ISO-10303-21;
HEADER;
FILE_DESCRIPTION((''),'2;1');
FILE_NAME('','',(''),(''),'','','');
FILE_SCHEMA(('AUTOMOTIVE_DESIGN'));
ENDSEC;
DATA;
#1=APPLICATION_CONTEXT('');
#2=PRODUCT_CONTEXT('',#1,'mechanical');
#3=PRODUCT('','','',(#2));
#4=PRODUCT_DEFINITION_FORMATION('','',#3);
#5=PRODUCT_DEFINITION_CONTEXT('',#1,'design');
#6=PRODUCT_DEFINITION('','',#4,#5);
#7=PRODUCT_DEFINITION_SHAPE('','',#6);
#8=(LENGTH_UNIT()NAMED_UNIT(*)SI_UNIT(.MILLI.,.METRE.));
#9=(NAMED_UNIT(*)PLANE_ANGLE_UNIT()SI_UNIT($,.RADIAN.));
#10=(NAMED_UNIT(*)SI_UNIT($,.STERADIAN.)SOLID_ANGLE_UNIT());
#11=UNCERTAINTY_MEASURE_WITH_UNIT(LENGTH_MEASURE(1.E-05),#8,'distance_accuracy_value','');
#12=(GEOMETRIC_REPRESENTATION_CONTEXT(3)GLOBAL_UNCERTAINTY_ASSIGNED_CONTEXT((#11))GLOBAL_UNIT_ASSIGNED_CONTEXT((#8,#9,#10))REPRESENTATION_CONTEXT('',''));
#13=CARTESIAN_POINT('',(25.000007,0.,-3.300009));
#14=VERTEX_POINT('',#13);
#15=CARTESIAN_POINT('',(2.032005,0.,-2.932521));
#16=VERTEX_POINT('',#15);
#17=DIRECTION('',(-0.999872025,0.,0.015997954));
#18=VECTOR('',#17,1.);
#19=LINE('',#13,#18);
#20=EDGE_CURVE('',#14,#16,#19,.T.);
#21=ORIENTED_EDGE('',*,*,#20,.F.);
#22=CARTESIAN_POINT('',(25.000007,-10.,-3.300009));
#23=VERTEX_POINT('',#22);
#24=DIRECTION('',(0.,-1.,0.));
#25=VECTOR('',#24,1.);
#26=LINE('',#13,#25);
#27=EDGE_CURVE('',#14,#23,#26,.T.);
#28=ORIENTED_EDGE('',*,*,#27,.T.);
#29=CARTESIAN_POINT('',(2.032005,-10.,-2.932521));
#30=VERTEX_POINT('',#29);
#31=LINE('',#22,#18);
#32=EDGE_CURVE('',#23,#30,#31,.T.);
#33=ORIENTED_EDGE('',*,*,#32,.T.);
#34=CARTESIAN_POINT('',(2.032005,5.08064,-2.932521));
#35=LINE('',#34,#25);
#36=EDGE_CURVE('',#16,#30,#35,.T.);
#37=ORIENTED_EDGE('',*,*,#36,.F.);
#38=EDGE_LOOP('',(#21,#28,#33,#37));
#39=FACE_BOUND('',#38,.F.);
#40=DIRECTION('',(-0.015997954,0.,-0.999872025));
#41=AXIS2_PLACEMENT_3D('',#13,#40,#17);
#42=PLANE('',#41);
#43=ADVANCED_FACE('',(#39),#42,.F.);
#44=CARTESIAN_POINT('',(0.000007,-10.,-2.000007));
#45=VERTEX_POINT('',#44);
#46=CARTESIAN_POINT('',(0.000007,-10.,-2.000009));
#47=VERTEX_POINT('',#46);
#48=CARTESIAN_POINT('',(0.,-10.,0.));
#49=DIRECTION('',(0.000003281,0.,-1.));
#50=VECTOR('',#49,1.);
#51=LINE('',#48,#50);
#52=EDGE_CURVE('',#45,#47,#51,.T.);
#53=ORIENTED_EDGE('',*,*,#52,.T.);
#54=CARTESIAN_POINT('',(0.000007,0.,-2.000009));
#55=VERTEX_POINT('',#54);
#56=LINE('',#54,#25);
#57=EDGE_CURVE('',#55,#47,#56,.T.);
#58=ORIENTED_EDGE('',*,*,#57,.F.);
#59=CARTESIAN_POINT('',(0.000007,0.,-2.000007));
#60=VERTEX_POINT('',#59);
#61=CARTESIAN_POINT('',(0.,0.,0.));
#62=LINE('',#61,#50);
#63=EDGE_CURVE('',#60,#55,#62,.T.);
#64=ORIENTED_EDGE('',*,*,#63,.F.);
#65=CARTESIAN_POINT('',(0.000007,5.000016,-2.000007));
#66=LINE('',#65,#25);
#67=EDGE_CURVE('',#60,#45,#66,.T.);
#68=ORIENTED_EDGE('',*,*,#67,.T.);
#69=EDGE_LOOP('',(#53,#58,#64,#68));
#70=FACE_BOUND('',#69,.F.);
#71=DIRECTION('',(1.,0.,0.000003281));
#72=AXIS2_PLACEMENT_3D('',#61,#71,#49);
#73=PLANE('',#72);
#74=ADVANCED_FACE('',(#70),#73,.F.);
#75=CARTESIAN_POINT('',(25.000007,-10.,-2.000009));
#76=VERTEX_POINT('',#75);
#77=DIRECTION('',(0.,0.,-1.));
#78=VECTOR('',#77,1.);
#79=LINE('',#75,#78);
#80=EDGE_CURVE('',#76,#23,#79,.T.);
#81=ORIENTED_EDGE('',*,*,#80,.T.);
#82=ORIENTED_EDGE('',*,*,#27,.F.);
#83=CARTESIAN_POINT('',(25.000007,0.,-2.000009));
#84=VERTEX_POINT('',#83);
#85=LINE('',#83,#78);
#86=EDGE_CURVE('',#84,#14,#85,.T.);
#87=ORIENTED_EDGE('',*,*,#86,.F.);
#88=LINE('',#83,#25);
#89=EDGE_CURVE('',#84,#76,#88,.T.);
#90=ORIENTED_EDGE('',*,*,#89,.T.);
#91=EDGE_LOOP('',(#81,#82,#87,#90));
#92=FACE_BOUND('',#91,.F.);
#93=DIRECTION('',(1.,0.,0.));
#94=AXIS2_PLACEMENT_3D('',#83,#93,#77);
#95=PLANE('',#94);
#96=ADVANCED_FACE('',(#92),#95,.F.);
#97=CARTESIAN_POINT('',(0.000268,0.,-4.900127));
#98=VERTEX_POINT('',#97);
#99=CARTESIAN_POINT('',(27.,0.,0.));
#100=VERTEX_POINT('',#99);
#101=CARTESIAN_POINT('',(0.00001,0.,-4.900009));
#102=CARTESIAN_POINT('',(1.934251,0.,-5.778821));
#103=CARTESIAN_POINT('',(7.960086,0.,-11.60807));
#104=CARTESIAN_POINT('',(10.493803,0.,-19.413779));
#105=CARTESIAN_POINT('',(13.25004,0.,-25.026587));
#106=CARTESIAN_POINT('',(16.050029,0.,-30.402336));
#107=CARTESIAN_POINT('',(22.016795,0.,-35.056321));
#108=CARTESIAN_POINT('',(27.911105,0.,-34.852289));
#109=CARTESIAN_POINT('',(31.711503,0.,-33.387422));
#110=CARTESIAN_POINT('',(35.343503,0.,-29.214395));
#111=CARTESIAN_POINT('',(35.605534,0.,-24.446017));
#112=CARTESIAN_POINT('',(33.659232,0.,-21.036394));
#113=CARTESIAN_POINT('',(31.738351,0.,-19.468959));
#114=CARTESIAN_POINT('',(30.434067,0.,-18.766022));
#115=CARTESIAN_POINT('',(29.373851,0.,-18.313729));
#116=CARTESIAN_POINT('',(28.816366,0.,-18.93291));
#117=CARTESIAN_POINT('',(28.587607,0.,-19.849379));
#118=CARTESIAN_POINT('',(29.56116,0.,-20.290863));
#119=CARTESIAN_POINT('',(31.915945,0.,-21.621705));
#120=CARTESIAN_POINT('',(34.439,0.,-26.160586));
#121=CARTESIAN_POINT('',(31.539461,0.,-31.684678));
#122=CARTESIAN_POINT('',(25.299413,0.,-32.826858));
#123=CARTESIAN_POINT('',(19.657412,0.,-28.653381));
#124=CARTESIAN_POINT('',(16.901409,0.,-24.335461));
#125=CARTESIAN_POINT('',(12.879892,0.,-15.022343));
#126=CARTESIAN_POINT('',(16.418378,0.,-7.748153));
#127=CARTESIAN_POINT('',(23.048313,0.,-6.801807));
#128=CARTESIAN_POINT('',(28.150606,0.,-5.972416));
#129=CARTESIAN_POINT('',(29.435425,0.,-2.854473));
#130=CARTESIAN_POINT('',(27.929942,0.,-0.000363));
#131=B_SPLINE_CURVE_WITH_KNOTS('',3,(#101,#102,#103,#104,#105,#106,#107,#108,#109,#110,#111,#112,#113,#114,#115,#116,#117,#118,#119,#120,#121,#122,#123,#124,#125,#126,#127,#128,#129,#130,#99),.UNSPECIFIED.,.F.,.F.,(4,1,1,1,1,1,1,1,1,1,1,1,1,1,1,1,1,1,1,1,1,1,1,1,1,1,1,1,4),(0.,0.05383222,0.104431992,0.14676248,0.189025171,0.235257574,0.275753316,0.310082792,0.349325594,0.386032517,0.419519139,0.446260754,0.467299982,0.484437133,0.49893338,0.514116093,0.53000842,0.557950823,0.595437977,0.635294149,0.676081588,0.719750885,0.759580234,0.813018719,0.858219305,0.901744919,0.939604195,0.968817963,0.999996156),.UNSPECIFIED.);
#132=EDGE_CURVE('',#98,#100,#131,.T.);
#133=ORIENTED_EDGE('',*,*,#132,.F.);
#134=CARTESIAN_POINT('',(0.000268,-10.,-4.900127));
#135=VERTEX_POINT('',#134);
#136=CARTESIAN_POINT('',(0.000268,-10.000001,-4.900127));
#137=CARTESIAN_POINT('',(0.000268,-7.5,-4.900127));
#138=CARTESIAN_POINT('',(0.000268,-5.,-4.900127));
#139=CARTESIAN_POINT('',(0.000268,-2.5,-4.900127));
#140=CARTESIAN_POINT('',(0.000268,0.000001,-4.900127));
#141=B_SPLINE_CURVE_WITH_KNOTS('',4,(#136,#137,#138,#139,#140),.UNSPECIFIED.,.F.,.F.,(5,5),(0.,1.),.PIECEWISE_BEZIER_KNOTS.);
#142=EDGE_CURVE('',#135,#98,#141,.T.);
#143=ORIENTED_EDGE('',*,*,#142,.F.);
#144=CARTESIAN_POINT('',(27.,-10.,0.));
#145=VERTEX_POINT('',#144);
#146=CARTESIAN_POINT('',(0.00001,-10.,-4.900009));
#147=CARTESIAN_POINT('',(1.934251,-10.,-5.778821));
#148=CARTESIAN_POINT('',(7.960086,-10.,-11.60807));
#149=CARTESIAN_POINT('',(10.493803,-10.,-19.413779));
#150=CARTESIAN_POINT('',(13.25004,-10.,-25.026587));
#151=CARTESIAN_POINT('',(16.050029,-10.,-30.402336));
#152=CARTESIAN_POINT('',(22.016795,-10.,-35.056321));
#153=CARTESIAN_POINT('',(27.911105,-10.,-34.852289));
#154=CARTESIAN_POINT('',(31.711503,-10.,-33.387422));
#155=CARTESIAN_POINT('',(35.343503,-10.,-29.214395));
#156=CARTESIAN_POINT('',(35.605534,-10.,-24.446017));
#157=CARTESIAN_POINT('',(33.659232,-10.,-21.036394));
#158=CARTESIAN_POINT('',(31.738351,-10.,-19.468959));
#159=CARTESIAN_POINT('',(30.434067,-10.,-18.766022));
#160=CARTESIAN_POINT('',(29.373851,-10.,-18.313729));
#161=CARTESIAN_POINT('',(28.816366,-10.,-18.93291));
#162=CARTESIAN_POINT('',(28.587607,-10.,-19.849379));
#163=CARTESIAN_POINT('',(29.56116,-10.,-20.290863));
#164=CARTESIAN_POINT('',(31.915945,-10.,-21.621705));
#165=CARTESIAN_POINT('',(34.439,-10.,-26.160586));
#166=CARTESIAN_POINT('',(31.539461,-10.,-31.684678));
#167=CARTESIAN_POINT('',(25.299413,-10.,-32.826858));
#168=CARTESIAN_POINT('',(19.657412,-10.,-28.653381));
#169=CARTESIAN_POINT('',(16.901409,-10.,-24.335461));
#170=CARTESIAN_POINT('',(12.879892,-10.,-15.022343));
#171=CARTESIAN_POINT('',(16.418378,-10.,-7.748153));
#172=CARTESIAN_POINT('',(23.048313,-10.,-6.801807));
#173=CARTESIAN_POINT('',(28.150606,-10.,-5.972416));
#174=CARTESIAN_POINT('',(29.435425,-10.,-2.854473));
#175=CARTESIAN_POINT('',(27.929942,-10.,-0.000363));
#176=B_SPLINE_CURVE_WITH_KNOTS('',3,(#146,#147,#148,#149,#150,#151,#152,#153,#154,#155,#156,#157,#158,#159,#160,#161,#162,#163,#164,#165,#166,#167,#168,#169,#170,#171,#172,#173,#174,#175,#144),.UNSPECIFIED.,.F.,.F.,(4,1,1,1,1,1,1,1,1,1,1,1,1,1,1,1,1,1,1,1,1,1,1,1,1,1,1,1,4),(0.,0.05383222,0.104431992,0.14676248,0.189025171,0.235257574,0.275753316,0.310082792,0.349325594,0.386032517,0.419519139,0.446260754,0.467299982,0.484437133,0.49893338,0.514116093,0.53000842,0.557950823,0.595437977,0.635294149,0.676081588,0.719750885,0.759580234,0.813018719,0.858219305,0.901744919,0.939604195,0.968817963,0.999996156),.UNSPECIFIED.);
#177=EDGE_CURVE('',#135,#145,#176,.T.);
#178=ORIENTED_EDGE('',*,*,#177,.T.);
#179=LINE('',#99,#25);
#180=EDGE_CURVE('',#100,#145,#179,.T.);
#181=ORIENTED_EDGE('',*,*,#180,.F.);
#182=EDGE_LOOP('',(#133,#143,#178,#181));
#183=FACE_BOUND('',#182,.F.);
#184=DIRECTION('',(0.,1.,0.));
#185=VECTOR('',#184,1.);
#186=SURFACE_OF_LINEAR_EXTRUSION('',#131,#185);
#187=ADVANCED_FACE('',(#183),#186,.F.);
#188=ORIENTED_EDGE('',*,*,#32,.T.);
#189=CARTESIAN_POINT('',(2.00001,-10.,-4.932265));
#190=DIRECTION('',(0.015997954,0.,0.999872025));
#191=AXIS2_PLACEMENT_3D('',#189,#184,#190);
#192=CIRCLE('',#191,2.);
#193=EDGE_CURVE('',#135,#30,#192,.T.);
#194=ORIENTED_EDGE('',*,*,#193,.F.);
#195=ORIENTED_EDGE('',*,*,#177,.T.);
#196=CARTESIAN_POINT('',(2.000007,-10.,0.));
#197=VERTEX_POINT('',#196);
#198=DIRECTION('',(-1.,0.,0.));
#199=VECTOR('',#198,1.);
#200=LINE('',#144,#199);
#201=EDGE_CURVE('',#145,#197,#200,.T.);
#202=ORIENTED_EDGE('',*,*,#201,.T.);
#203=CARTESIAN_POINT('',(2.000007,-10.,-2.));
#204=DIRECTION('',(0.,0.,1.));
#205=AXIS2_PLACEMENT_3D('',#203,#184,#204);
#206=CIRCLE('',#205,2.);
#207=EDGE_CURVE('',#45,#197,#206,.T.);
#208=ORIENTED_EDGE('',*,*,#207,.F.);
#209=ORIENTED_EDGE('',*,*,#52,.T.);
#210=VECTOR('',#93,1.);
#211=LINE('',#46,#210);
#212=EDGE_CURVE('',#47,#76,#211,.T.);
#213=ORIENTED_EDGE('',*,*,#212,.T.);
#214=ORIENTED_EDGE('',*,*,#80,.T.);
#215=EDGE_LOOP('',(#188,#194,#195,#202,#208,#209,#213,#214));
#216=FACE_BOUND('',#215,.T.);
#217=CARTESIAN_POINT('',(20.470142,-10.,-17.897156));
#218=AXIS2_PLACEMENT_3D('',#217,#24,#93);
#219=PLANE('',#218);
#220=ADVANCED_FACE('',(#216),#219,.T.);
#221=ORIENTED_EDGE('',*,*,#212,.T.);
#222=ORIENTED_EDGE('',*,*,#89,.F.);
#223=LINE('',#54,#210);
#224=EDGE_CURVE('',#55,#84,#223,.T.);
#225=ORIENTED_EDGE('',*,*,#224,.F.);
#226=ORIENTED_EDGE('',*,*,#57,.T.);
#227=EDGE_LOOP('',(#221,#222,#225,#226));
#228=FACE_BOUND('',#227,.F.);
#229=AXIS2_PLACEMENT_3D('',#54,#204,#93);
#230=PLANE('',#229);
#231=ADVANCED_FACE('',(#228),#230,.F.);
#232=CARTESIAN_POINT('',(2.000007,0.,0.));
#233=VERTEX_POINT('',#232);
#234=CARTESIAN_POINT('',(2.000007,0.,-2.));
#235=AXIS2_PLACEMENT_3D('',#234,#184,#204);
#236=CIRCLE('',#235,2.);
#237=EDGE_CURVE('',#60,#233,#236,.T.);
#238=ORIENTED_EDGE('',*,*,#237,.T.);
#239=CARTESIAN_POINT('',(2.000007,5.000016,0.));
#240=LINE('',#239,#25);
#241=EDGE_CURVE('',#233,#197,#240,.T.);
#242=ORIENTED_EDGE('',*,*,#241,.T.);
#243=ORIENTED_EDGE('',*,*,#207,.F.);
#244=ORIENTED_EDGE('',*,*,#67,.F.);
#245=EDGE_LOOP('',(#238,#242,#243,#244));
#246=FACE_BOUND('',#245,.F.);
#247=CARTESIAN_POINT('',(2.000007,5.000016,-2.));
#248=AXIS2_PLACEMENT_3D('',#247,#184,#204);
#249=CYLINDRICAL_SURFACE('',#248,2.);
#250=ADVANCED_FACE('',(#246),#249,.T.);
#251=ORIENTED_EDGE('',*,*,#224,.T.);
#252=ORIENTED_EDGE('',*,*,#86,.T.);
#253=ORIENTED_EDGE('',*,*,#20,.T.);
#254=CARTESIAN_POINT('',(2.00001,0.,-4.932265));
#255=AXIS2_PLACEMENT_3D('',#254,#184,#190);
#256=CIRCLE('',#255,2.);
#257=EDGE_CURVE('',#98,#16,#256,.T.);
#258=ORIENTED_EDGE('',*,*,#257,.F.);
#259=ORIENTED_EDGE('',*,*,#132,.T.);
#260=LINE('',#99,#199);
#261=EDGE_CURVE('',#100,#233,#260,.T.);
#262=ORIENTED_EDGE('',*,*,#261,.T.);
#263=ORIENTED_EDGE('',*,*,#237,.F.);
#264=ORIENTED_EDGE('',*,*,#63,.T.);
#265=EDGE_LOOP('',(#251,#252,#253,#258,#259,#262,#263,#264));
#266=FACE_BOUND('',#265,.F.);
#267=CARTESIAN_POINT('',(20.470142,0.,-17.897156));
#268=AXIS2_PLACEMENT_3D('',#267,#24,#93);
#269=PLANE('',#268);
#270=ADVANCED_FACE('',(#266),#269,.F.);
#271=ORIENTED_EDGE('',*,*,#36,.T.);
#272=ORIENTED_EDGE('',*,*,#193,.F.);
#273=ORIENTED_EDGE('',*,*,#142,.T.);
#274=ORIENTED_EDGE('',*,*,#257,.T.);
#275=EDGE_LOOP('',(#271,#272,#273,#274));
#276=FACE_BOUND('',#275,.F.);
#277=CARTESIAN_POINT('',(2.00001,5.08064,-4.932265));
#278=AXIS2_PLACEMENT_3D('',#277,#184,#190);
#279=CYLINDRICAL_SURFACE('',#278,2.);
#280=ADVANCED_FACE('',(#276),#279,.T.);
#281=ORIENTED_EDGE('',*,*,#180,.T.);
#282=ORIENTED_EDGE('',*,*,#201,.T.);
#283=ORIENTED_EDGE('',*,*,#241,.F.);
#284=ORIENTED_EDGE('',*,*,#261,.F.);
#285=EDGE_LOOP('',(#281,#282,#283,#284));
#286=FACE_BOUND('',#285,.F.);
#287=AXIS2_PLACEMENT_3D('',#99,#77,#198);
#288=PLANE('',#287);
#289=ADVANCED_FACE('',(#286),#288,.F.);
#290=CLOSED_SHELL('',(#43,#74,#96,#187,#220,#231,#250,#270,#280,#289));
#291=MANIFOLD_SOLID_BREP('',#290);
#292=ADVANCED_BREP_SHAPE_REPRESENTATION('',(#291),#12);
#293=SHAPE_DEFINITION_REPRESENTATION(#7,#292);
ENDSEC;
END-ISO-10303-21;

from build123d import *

# Parameters (mm, degrees)
F1_DEPTH    = 10
F2_T1_DEPTH = 20.0000328068
F2_T3_DEPTH = 20.1612799373


# Not quite as in the source:
# - a fillet or chamfer that OpenCascade refuses, or shapes differently, is made with other operations: its cross-section is extruded or revolved along the edge and cut away or added


with BuildPart() as f1:
    # F0 (on Front) → F1 (new body)
    with BuildSketch(Plane.XZ):
        with BuildLine():
            add(Edge.make_bspline(
                [(9.514e-06, -4.9000092057), (1.9342509703, -5.7788205185), (7.9600856629, -11.6080696819), (10.4938031921, -19.4137793601), (13.2500403785, -25.0265866718), (16.0500289635, -30.4023358123), (22.0167950969, -35.0563207405), (27.911105346, -34.8522886828), (31.7115032113, -33.387422259), (35.3435032228, -29.2143946597), (35.6055339141, -24.4460169523), (33.6592318937, -21.0363941268), (31.7383507436, -19.4689594446), (30.43406686, -18.7660216625), (29.3738509318, -18.3137291708), (28.816366228, -18.9329098548), (28.5876066373, -19.8493794371), (29.561159644, -20.2908633132), (31.9159451144, -21.6217051412), (34.4389998824, -26.1605857299), (31.5394611129, -31.68467843), (25.2994133189, -32.8268584607), (19.6574120082, -28.6533809644), (16.9014092861, -24.3354611486), (12.8798924189, -15.0223427162), (16.4183782289, -7.7481533751), (23.0483128553, -6.8018068739), (28.1506056372, -5.9724164167), (29.4354248767, -2.8544727466), (27.9299423215, -0.000363307), (27, 0)],
                knots=[0, 0, 0, 0, 0.05383222, 0.1044319916, 0.1467624797, 0.1890251708, 0.2352575736, 0.2757533164, 0.3100827924, 0.3493255944, 0.3860325166, 0.4195191391, 0.4462607539, 0.4672999815, 0.4844371334, 0.4989333801, 0.5141160934, 0.5300084197, 0.557950823, 0.5954379769, 0.6352941495, 0.6760815879, 0.7197508846, 0.7595802338, 0.813018719, 0.8582193053, 0.9017449186, 0.9396041953, 0.9688179628, 0.9999961563, 0.9999961563, 0.9999961563, 0.9999961563], degree=3))
            Line((27, 0), (27, -4.9000092057))
            Line((27, -4.9000092057), (9.514e-06, -4.9000092057))
        make_face()
        Polygon((26.9996560599, 0), (0, 0), (6.5614e-06, -2.0000092057), (25.0000065614, -2.0000092057), (25.0000065614, -3.3000092057), (9.514e-06, -2.9000092057), (9.514e-06, -4.9000092057), (27, -4.9000092057), (27, 0), align=None)
    extrude(amount=F1_DEPTH)

    # F2: fillet of radius 2 on 2 edges, made by hand

    # F2_s2 → F2_t1 (cut)
    with BuildSketch(Plane.XZ.offset(-5.0000164034)):
        with BuildLine():
            ThreePointArc((2.0000065614, 0), (0.5857906792, -0.5857887574), (6.5614e-06, -2.0000065613))
            Line((6.5614e-06, -2.0000065613), (0, 0))
            Line((0, 0), (2.0000065614, 0))
        make_face()
    extrude(amount=F2_T1_DEPTH, mode=Mode.SUBTRACT)

    # F2_s4 → F2_t3 (cut)
    with BuildSketch(Plane.XZ.offset(-5.0806399686)):
        with BuildLine():
            ThreePointArc((2.0320054225, -2.9325211441), (0.5971538224, -3.5067842537), (9.514e-06, -4.9322651931))
            Line((9.514e-06, -4.9322651931), (9.514e-06, -2.9000092057))
            Line((9.514e-06, -2.9000092057), (2.0320054225, -2.9325211441))
        make_face()
    extrude(amount=F2_T3_DEPTH, mode=Mode.SUBTRACT)


solid = f1.part
